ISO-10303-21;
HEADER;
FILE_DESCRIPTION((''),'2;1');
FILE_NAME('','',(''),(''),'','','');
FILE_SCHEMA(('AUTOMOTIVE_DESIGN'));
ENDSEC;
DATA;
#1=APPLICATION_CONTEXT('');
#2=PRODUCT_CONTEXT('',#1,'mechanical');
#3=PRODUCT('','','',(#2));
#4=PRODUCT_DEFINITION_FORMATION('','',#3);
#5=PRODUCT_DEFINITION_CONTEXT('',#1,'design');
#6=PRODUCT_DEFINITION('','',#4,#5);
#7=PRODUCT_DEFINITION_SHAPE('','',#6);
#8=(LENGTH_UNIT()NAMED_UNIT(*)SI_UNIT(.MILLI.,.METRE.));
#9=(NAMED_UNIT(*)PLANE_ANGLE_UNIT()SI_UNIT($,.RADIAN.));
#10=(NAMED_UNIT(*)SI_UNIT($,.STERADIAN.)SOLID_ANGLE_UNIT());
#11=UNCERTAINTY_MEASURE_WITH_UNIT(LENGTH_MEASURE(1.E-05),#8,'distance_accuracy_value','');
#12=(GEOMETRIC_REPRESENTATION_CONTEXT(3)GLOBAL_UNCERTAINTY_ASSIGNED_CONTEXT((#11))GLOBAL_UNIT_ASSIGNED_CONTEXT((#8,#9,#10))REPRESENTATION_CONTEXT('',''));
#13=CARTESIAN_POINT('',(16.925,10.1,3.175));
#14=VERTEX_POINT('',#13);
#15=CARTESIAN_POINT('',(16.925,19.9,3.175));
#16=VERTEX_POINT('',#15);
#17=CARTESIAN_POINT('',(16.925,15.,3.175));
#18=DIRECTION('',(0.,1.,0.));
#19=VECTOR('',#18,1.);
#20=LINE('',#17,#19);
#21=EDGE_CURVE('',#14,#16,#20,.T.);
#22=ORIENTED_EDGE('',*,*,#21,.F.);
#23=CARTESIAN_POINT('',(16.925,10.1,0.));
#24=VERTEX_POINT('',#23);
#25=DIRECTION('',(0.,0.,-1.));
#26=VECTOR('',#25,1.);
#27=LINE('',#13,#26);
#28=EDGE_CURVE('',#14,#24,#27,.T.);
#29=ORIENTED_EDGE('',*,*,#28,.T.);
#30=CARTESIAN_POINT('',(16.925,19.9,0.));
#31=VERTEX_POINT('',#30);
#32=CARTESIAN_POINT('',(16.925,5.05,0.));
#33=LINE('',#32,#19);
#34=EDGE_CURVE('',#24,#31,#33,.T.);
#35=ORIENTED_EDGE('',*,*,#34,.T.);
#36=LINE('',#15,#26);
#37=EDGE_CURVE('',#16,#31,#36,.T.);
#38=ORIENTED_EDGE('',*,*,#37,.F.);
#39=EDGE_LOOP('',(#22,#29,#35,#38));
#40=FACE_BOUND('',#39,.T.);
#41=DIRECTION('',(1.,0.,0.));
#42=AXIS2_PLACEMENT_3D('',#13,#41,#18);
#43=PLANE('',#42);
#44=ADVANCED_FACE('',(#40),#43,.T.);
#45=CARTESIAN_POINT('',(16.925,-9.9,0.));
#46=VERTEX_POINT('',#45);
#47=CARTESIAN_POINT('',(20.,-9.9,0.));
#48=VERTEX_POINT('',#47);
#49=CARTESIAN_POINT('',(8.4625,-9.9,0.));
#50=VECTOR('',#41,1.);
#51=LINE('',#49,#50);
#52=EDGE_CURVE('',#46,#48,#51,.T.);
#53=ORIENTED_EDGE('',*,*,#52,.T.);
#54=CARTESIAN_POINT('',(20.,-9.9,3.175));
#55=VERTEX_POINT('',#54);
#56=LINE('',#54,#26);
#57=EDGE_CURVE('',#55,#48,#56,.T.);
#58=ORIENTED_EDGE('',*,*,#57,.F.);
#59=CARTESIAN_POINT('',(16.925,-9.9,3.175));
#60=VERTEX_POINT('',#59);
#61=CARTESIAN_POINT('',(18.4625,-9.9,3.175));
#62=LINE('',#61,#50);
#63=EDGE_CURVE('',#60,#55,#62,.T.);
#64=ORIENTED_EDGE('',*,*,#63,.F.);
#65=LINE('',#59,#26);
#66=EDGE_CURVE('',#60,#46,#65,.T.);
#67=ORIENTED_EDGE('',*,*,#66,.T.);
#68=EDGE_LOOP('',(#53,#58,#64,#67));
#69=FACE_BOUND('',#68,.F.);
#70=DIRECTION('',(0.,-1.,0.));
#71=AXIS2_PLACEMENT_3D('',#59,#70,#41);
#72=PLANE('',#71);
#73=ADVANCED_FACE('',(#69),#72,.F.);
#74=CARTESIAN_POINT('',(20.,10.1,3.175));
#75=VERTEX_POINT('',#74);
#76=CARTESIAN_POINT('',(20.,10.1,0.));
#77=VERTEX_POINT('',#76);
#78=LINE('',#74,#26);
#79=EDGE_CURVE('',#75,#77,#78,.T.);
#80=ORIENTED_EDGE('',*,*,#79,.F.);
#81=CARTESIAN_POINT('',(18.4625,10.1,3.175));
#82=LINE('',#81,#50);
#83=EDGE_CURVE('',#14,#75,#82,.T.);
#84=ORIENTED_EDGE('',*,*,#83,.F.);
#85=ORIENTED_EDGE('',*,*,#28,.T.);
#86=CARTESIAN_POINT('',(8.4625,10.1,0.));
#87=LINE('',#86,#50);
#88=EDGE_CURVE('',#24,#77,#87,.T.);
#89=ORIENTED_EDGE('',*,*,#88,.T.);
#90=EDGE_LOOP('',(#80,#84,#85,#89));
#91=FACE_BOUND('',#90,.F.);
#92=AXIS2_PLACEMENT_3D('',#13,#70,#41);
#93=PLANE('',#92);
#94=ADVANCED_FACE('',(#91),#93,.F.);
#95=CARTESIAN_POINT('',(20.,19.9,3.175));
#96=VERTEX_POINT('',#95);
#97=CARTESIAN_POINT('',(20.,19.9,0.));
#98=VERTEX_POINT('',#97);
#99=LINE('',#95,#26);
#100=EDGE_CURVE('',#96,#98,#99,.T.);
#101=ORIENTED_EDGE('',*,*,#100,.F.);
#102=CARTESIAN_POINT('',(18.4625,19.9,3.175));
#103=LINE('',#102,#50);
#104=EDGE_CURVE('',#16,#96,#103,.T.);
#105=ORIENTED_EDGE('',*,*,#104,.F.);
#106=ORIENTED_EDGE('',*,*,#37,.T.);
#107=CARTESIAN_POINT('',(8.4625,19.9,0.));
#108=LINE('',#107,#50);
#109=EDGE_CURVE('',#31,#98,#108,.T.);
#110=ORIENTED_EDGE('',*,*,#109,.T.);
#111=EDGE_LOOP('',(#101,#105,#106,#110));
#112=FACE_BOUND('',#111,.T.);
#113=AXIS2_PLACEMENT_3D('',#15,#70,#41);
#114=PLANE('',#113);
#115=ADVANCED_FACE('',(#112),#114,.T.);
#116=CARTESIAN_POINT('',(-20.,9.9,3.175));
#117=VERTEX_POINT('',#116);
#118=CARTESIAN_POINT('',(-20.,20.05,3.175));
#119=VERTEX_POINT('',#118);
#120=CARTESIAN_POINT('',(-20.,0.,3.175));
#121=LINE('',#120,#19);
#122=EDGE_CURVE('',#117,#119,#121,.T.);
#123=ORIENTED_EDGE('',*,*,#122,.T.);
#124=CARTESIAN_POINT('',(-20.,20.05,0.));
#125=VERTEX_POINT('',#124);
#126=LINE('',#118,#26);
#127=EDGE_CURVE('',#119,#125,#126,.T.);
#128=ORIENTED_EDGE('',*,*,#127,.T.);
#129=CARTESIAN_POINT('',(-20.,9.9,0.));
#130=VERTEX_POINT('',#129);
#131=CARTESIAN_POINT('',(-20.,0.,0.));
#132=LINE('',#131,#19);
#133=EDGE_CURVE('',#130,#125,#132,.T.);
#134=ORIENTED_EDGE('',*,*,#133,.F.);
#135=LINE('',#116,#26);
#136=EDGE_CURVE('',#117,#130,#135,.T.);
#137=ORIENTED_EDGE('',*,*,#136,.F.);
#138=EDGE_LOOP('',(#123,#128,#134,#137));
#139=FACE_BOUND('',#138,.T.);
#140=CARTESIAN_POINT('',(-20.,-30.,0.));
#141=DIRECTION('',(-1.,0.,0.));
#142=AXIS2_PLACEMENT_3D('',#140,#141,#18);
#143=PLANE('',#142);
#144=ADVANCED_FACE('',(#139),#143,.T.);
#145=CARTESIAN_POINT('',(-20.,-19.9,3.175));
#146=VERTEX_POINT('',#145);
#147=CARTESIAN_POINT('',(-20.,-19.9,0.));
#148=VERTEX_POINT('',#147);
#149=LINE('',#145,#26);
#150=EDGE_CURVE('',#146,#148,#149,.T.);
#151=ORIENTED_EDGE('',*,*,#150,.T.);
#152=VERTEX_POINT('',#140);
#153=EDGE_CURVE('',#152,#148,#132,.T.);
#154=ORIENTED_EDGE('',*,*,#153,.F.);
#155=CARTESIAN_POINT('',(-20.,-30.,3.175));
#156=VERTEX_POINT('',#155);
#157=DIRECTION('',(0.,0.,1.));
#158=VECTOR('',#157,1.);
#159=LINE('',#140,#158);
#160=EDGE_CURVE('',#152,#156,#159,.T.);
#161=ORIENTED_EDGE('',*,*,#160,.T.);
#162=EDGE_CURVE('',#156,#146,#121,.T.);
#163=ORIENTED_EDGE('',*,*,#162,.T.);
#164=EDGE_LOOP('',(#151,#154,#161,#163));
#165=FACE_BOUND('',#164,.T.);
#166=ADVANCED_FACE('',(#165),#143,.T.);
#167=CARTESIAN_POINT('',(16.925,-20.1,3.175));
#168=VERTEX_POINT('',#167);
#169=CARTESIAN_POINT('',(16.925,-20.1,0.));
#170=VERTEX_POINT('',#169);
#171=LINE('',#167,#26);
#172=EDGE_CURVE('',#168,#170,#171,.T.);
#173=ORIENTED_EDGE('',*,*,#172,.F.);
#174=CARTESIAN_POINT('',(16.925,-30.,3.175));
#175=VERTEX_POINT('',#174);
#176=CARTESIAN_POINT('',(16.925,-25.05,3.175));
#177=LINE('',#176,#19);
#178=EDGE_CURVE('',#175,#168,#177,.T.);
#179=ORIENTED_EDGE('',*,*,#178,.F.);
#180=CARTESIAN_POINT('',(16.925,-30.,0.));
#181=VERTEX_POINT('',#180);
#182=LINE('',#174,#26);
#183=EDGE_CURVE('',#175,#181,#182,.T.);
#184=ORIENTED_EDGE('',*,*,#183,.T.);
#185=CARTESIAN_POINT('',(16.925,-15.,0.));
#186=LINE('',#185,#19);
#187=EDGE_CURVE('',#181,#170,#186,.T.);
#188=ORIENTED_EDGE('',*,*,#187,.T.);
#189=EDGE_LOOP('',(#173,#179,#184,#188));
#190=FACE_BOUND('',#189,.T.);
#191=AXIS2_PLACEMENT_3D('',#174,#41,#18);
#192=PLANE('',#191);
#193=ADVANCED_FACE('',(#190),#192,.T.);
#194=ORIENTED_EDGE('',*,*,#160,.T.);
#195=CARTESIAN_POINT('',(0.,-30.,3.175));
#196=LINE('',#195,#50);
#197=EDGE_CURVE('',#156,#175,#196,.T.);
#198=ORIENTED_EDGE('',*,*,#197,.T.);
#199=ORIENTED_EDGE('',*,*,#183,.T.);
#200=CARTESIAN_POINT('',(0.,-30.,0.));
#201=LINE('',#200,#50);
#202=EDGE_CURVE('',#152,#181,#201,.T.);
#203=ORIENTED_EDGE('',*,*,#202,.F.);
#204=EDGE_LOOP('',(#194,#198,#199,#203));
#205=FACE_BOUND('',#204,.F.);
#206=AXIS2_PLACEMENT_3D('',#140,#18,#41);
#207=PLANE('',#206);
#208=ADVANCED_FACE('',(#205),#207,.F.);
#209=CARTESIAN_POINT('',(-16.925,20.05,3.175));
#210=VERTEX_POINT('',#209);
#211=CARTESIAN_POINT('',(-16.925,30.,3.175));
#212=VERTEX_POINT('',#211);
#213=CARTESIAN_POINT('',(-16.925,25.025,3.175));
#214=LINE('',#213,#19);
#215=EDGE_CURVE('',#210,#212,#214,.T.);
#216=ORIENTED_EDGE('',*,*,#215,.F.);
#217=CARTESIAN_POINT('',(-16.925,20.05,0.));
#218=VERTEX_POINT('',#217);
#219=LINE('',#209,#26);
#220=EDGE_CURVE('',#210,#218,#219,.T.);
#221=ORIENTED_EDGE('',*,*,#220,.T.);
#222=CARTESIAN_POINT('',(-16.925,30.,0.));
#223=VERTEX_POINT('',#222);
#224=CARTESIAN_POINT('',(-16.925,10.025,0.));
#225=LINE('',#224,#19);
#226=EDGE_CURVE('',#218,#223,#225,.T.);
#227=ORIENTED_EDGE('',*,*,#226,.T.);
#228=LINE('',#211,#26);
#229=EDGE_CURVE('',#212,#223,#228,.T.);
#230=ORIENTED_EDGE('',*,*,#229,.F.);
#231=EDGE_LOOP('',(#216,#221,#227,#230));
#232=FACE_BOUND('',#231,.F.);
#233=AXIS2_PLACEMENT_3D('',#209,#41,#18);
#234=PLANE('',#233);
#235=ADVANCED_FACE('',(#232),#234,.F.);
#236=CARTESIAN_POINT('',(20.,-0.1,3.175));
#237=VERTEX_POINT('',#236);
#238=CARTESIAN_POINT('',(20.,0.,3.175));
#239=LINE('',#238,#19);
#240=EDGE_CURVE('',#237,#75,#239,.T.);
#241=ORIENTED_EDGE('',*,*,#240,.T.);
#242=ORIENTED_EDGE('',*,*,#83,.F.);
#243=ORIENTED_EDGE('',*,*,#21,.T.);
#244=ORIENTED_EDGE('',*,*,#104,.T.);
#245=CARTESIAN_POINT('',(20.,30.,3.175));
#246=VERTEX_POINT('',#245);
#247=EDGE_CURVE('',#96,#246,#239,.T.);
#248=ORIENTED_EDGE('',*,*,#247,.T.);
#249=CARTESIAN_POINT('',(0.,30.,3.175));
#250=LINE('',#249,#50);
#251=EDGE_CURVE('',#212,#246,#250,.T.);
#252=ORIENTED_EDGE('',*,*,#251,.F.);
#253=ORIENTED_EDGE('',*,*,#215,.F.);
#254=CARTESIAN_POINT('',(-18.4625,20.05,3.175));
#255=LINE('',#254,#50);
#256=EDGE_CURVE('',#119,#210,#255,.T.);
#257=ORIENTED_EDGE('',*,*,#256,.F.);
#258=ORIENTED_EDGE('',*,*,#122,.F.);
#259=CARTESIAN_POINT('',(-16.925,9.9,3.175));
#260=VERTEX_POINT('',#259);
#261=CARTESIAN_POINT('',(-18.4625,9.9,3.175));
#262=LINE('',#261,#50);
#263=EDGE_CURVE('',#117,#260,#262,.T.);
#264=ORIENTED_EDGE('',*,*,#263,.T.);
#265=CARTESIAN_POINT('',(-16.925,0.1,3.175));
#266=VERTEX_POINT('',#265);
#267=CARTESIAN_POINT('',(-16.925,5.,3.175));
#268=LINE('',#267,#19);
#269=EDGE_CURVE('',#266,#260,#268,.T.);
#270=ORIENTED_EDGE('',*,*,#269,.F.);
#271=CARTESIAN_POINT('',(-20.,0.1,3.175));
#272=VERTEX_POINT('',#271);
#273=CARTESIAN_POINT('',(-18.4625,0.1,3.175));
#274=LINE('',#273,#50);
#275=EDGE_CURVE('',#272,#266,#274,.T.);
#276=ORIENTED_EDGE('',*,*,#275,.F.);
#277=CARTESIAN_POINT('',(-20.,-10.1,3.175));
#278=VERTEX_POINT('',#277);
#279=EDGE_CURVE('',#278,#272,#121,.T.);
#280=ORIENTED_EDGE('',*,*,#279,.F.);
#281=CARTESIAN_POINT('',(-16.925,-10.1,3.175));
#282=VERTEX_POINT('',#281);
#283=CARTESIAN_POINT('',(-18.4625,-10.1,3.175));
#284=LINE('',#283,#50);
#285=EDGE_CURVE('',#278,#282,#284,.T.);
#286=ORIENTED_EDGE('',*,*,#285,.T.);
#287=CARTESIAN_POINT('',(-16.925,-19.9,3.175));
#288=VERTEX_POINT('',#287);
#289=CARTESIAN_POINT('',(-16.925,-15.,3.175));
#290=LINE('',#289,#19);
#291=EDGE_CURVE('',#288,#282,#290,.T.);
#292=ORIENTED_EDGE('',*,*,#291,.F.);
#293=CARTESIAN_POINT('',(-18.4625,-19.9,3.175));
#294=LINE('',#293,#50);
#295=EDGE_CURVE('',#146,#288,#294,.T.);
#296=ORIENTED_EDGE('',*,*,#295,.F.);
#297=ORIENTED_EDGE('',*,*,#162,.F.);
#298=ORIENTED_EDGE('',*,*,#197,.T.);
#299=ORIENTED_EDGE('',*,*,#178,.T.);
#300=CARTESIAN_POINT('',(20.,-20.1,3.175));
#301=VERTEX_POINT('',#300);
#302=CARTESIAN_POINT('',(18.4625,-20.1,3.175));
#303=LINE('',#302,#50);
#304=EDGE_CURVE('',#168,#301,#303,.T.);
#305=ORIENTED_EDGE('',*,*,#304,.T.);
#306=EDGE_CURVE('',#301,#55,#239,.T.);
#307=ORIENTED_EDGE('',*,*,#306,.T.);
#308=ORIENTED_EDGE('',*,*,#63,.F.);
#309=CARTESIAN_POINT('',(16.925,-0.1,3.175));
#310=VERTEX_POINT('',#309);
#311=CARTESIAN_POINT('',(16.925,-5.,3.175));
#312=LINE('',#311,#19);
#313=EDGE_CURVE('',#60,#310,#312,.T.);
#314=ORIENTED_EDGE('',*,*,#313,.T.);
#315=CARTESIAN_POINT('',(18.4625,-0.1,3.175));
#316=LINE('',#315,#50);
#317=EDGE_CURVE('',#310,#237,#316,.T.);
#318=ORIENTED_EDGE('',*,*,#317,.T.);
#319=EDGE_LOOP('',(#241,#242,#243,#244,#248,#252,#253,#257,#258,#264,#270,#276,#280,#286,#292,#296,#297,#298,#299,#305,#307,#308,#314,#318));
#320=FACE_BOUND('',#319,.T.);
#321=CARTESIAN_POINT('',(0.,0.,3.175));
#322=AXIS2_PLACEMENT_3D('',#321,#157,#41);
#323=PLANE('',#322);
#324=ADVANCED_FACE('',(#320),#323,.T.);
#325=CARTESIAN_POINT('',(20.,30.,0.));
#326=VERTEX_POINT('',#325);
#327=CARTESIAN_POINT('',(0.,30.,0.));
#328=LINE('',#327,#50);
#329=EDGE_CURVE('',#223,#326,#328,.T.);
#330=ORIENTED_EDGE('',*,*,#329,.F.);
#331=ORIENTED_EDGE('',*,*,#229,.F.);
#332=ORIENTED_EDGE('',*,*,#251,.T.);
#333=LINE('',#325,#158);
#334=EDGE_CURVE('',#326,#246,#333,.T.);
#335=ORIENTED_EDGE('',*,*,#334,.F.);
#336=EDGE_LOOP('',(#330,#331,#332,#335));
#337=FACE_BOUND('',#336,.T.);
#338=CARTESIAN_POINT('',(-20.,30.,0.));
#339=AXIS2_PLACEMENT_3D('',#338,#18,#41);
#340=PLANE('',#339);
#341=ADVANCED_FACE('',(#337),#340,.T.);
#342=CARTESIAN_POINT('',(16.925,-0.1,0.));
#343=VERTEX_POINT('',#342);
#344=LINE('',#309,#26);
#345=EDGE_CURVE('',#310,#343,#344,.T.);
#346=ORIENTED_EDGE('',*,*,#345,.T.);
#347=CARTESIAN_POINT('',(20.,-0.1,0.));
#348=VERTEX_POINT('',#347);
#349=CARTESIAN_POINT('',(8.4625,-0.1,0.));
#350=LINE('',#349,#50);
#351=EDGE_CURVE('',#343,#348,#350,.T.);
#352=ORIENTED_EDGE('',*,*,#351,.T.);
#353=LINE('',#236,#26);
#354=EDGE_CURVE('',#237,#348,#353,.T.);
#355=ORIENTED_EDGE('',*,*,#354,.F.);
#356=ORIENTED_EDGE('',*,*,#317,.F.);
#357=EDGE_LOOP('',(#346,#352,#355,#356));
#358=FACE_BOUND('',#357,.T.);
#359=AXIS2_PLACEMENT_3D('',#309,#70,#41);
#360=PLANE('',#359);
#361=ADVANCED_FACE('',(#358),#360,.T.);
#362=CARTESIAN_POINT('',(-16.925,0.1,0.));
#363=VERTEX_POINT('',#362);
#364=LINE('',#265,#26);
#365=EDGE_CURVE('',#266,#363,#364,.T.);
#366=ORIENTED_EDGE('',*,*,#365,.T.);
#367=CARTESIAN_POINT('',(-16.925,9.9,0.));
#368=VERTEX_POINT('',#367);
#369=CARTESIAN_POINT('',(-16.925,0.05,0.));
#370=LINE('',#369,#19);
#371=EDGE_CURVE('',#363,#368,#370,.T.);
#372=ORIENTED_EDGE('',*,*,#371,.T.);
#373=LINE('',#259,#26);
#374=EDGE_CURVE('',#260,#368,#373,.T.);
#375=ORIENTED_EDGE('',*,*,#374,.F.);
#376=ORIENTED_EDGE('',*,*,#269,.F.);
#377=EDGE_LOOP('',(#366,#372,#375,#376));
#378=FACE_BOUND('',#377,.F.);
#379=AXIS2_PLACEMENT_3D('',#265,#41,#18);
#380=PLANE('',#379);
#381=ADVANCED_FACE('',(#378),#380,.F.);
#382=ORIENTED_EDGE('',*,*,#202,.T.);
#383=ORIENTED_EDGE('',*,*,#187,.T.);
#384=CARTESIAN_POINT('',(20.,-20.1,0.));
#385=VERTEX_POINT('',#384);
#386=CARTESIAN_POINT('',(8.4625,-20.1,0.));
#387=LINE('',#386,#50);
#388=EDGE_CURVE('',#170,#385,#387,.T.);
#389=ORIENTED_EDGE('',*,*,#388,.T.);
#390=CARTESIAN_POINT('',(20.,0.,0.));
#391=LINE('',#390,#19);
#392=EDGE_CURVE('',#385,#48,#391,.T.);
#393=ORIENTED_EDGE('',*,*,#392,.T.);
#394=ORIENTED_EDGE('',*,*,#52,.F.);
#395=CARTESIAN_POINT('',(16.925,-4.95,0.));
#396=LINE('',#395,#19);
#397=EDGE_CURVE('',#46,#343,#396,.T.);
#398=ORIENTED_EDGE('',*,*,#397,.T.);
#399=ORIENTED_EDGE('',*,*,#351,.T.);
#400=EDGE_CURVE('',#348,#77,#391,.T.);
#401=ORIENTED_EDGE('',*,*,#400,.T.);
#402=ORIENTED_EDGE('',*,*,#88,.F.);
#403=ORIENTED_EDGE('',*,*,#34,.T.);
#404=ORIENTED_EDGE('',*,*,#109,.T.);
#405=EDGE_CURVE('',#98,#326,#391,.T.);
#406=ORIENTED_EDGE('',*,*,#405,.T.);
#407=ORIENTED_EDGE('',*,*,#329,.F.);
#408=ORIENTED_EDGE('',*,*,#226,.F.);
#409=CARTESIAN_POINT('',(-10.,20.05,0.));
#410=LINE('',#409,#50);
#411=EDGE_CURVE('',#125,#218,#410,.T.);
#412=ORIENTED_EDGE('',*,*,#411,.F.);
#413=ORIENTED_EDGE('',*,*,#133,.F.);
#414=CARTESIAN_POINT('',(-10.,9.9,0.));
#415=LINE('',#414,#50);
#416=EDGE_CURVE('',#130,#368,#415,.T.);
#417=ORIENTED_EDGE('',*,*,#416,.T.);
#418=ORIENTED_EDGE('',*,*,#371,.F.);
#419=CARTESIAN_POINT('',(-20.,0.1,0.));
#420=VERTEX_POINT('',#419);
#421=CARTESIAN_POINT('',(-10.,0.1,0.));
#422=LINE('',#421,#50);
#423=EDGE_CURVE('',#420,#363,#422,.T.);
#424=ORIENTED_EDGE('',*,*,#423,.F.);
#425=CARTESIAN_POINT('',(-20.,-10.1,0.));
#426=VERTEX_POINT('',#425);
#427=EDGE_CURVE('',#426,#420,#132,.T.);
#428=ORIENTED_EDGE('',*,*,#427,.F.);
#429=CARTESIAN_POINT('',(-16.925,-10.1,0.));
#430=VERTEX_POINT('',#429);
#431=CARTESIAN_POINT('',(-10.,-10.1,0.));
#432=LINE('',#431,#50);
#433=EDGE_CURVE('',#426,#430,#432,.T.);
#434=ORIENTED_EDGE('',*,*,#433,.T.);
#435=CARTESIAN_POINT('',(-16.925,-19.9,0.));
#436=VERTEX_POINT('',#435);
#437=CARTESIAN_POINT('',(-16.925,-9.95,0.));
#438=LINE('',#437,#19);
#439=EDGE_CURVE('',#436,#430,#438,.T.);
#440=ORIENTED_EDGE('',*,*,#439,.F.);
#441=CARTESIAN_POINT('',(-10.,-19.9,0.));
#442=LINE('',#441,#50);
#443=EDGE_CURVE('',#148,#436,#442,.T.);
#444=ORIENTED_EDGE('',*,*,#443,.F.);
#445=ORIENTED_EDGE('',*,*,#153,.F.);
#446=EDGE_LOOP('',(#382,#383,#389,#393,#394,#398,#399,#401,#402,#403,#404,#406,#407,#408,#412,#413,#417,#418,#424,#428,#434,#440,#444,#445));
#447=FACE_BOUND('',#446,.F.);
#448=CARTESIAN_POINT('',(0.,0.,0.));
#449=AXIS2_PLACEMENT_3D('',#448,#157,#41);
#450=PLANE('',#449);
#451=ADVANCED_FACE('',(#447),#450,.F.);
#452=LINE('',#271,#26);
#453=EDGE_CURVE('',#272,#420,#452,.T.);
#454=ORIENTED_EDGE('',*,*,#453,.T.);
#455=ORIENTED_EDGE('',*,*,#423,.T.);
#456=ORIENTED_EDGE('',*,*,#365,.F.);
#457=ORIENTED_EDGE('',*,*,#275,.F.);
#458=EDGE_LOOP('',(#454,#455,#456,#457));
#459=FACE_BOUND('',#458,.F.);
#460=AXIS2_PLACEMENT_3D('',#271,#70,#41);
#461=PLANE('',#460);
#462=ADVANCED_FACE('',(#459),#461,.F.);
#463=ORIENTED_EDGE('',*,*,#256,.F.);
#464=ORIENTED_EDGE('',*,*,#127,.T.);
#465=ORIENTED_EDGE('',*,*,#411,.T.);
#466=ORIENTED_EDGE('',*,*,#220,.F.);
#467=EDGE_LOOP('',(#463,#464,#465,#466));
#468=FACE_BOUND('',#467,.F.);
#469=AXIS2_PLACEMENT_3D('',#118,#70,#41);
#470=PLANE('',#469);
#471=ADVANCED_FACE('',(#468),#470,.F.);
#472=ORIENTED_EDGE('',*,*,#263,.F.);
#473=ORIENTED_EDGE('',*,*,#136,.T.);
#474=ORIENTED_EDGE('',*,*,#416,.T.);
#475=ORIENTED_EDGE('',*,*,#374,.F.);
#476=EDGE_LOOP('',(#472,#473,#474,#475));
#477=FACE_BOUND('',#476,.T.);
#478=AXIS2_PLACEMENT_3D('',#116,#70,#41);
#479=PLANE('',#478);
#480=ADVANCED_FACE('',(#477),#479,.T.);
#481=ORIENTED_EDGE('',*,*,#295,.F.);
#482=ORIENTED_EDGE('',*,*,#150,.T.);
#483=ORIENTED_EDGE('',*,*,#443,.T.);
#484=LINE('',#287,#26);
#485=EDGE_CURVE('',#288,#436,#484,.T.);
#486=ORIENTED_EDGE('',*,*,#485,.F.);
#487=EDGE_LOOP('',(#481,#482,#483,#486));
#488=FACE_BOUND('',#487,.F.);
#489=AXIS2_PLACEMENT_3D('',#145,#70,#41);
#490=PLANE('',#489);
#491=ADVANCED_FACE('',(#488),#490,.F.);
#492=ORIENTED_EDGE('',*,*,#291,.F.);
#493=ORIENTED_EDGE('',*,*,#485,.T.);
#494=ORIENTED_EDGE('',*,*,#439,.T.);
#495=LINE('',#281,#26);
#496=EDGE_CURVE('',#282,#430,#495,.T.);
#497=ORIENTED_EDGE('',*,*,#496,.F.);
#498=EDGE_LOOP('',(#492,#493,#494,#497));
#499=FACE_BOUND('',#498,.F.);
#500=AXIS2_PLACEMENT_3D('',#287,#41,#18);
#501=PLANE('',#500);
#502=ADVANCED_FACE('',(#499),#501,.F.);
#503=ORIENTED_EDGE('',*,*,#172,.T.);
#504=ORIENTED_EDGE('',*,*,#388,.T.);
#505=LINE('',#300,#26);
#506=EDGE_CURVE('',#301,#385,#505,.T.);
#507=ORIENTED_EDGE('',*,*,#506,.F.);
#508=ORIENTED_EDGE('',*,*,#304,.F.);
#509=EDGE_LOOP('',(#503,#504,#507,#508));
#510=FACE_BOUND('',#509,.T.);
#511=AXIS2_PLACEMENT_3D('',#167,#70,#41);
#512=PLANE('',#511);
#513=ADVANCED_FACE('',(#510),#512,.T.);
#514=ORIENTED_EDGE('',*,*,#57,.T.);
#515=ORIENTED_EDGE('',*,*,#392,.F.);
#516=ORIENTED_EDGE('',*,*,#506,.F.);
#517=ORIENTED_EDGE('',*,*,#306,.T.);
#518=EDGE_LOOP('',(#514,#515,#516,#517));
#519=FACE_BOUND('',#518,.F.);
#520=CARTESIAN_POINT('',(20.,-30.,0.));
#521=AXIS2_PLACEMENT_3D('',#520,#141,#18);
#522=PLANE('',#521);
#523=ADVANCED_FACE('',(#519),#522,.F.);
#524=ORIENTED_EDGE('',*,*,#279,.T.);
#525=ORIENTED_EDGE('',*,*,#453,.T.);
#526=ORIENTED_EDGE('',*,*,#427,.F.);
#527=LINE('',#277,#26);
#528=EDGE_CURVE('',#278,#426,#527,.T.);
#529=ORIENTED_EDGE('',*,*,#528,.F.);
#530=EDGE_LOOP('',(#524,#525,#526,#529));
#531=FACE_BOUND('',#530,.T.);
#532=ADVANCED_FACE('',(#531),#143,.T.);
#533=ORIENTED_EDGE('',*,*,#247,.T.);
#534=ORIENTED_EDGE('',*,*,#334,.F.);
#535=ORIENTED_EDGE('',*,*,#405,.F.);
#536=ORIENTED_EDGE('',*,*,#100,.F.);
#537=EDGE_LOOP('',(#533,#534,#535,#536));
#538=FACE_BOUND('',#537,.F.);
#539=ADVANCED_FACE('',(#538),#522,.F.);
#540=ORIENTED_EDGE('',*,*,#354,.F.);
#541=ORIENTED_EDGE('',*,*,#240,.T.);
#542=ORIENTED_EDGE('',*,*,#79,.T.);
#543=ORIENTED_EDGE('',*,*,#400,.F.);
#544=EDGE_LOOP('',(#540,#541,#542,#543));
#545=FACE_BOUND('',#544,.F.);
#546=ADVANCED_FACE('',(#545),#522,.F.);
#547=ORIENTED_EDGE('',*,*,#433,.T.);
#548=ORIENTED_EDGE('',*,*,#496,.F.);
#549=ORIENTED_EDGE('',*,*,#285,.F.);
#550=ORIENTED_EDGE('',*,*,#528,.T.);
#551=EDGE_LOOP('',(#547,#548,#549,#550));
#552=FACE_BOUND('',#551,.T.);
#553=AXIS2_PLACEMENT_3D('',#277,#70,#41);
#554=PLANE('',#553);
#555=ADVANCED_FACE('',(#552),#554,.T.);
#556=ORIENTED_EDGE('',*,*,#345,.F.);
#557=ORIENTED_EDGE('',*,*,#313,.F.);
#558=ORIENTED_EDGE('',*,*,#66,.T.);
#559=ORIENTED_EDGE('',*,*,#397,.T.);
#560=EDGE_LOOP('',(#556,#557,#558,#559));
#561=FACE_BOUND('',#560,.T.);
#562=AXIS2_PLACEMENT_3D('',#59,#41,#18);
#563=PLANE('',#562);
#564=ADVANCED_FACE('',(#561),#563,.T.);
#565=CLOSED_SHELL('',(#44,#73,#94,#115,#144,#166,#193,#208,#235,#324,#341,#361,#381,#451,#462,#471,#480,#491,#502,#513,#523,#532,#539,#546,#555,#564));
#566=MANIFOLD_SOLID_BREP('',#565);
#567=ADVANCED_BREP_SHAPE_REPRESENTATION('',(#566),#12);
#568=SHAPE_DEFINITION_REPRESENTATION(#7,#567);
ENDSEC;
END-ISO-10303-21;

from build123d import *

# Parameters (mm, degrees)
F0_W     = 40
F0_H     = 60
F1_DEPTH = 3.175
F2_W     = 3.075
F2_H     = 9.9
F2_H_2   = 9.8
F2_H_3   = 9.95
F3_DEPTH = 25


# Not quite as in the source:
# - a length typed as a fraction of an inch, garbled in the dataset ("3 / 203.2 mm" for 3/8 in), is restored


with BuildPart() as f1:
    # F0 (on Top) → F1 (new body)
    with BuildSketch(Plane.XY):
        Rectangle(F0_W, F0_H)
    extrude(amount=F1_DEPTH)

    # F2 (on face) → F3 (cut)
    with BuildSketch(Plane.XY.offset(3.175)):
        with Locations((18.4625, -25.05)):
            Rectangle(F2_W, F2_H)
        with Locations((18.4625, -5)):
            Rectangle(F2_W, F2_H_2)
        with Locations((18.4625, 15)):
            Rectangle(F2_W, F2_H_2)
        with Locations((-18.4625, -15)):
            Rectangle(F2_W, F2_H_2)
        with Locations((-18.4625, 5)):
            Rectangle(F2_W, F2_H_2)
        with Locations((-18.4625, 25.025)):
            Rectangle(F2_W, F2_H_3)
    extrude(amount=-F3_DEPTH, mode=Mode.SUBTRACT)


solid = f1.part
